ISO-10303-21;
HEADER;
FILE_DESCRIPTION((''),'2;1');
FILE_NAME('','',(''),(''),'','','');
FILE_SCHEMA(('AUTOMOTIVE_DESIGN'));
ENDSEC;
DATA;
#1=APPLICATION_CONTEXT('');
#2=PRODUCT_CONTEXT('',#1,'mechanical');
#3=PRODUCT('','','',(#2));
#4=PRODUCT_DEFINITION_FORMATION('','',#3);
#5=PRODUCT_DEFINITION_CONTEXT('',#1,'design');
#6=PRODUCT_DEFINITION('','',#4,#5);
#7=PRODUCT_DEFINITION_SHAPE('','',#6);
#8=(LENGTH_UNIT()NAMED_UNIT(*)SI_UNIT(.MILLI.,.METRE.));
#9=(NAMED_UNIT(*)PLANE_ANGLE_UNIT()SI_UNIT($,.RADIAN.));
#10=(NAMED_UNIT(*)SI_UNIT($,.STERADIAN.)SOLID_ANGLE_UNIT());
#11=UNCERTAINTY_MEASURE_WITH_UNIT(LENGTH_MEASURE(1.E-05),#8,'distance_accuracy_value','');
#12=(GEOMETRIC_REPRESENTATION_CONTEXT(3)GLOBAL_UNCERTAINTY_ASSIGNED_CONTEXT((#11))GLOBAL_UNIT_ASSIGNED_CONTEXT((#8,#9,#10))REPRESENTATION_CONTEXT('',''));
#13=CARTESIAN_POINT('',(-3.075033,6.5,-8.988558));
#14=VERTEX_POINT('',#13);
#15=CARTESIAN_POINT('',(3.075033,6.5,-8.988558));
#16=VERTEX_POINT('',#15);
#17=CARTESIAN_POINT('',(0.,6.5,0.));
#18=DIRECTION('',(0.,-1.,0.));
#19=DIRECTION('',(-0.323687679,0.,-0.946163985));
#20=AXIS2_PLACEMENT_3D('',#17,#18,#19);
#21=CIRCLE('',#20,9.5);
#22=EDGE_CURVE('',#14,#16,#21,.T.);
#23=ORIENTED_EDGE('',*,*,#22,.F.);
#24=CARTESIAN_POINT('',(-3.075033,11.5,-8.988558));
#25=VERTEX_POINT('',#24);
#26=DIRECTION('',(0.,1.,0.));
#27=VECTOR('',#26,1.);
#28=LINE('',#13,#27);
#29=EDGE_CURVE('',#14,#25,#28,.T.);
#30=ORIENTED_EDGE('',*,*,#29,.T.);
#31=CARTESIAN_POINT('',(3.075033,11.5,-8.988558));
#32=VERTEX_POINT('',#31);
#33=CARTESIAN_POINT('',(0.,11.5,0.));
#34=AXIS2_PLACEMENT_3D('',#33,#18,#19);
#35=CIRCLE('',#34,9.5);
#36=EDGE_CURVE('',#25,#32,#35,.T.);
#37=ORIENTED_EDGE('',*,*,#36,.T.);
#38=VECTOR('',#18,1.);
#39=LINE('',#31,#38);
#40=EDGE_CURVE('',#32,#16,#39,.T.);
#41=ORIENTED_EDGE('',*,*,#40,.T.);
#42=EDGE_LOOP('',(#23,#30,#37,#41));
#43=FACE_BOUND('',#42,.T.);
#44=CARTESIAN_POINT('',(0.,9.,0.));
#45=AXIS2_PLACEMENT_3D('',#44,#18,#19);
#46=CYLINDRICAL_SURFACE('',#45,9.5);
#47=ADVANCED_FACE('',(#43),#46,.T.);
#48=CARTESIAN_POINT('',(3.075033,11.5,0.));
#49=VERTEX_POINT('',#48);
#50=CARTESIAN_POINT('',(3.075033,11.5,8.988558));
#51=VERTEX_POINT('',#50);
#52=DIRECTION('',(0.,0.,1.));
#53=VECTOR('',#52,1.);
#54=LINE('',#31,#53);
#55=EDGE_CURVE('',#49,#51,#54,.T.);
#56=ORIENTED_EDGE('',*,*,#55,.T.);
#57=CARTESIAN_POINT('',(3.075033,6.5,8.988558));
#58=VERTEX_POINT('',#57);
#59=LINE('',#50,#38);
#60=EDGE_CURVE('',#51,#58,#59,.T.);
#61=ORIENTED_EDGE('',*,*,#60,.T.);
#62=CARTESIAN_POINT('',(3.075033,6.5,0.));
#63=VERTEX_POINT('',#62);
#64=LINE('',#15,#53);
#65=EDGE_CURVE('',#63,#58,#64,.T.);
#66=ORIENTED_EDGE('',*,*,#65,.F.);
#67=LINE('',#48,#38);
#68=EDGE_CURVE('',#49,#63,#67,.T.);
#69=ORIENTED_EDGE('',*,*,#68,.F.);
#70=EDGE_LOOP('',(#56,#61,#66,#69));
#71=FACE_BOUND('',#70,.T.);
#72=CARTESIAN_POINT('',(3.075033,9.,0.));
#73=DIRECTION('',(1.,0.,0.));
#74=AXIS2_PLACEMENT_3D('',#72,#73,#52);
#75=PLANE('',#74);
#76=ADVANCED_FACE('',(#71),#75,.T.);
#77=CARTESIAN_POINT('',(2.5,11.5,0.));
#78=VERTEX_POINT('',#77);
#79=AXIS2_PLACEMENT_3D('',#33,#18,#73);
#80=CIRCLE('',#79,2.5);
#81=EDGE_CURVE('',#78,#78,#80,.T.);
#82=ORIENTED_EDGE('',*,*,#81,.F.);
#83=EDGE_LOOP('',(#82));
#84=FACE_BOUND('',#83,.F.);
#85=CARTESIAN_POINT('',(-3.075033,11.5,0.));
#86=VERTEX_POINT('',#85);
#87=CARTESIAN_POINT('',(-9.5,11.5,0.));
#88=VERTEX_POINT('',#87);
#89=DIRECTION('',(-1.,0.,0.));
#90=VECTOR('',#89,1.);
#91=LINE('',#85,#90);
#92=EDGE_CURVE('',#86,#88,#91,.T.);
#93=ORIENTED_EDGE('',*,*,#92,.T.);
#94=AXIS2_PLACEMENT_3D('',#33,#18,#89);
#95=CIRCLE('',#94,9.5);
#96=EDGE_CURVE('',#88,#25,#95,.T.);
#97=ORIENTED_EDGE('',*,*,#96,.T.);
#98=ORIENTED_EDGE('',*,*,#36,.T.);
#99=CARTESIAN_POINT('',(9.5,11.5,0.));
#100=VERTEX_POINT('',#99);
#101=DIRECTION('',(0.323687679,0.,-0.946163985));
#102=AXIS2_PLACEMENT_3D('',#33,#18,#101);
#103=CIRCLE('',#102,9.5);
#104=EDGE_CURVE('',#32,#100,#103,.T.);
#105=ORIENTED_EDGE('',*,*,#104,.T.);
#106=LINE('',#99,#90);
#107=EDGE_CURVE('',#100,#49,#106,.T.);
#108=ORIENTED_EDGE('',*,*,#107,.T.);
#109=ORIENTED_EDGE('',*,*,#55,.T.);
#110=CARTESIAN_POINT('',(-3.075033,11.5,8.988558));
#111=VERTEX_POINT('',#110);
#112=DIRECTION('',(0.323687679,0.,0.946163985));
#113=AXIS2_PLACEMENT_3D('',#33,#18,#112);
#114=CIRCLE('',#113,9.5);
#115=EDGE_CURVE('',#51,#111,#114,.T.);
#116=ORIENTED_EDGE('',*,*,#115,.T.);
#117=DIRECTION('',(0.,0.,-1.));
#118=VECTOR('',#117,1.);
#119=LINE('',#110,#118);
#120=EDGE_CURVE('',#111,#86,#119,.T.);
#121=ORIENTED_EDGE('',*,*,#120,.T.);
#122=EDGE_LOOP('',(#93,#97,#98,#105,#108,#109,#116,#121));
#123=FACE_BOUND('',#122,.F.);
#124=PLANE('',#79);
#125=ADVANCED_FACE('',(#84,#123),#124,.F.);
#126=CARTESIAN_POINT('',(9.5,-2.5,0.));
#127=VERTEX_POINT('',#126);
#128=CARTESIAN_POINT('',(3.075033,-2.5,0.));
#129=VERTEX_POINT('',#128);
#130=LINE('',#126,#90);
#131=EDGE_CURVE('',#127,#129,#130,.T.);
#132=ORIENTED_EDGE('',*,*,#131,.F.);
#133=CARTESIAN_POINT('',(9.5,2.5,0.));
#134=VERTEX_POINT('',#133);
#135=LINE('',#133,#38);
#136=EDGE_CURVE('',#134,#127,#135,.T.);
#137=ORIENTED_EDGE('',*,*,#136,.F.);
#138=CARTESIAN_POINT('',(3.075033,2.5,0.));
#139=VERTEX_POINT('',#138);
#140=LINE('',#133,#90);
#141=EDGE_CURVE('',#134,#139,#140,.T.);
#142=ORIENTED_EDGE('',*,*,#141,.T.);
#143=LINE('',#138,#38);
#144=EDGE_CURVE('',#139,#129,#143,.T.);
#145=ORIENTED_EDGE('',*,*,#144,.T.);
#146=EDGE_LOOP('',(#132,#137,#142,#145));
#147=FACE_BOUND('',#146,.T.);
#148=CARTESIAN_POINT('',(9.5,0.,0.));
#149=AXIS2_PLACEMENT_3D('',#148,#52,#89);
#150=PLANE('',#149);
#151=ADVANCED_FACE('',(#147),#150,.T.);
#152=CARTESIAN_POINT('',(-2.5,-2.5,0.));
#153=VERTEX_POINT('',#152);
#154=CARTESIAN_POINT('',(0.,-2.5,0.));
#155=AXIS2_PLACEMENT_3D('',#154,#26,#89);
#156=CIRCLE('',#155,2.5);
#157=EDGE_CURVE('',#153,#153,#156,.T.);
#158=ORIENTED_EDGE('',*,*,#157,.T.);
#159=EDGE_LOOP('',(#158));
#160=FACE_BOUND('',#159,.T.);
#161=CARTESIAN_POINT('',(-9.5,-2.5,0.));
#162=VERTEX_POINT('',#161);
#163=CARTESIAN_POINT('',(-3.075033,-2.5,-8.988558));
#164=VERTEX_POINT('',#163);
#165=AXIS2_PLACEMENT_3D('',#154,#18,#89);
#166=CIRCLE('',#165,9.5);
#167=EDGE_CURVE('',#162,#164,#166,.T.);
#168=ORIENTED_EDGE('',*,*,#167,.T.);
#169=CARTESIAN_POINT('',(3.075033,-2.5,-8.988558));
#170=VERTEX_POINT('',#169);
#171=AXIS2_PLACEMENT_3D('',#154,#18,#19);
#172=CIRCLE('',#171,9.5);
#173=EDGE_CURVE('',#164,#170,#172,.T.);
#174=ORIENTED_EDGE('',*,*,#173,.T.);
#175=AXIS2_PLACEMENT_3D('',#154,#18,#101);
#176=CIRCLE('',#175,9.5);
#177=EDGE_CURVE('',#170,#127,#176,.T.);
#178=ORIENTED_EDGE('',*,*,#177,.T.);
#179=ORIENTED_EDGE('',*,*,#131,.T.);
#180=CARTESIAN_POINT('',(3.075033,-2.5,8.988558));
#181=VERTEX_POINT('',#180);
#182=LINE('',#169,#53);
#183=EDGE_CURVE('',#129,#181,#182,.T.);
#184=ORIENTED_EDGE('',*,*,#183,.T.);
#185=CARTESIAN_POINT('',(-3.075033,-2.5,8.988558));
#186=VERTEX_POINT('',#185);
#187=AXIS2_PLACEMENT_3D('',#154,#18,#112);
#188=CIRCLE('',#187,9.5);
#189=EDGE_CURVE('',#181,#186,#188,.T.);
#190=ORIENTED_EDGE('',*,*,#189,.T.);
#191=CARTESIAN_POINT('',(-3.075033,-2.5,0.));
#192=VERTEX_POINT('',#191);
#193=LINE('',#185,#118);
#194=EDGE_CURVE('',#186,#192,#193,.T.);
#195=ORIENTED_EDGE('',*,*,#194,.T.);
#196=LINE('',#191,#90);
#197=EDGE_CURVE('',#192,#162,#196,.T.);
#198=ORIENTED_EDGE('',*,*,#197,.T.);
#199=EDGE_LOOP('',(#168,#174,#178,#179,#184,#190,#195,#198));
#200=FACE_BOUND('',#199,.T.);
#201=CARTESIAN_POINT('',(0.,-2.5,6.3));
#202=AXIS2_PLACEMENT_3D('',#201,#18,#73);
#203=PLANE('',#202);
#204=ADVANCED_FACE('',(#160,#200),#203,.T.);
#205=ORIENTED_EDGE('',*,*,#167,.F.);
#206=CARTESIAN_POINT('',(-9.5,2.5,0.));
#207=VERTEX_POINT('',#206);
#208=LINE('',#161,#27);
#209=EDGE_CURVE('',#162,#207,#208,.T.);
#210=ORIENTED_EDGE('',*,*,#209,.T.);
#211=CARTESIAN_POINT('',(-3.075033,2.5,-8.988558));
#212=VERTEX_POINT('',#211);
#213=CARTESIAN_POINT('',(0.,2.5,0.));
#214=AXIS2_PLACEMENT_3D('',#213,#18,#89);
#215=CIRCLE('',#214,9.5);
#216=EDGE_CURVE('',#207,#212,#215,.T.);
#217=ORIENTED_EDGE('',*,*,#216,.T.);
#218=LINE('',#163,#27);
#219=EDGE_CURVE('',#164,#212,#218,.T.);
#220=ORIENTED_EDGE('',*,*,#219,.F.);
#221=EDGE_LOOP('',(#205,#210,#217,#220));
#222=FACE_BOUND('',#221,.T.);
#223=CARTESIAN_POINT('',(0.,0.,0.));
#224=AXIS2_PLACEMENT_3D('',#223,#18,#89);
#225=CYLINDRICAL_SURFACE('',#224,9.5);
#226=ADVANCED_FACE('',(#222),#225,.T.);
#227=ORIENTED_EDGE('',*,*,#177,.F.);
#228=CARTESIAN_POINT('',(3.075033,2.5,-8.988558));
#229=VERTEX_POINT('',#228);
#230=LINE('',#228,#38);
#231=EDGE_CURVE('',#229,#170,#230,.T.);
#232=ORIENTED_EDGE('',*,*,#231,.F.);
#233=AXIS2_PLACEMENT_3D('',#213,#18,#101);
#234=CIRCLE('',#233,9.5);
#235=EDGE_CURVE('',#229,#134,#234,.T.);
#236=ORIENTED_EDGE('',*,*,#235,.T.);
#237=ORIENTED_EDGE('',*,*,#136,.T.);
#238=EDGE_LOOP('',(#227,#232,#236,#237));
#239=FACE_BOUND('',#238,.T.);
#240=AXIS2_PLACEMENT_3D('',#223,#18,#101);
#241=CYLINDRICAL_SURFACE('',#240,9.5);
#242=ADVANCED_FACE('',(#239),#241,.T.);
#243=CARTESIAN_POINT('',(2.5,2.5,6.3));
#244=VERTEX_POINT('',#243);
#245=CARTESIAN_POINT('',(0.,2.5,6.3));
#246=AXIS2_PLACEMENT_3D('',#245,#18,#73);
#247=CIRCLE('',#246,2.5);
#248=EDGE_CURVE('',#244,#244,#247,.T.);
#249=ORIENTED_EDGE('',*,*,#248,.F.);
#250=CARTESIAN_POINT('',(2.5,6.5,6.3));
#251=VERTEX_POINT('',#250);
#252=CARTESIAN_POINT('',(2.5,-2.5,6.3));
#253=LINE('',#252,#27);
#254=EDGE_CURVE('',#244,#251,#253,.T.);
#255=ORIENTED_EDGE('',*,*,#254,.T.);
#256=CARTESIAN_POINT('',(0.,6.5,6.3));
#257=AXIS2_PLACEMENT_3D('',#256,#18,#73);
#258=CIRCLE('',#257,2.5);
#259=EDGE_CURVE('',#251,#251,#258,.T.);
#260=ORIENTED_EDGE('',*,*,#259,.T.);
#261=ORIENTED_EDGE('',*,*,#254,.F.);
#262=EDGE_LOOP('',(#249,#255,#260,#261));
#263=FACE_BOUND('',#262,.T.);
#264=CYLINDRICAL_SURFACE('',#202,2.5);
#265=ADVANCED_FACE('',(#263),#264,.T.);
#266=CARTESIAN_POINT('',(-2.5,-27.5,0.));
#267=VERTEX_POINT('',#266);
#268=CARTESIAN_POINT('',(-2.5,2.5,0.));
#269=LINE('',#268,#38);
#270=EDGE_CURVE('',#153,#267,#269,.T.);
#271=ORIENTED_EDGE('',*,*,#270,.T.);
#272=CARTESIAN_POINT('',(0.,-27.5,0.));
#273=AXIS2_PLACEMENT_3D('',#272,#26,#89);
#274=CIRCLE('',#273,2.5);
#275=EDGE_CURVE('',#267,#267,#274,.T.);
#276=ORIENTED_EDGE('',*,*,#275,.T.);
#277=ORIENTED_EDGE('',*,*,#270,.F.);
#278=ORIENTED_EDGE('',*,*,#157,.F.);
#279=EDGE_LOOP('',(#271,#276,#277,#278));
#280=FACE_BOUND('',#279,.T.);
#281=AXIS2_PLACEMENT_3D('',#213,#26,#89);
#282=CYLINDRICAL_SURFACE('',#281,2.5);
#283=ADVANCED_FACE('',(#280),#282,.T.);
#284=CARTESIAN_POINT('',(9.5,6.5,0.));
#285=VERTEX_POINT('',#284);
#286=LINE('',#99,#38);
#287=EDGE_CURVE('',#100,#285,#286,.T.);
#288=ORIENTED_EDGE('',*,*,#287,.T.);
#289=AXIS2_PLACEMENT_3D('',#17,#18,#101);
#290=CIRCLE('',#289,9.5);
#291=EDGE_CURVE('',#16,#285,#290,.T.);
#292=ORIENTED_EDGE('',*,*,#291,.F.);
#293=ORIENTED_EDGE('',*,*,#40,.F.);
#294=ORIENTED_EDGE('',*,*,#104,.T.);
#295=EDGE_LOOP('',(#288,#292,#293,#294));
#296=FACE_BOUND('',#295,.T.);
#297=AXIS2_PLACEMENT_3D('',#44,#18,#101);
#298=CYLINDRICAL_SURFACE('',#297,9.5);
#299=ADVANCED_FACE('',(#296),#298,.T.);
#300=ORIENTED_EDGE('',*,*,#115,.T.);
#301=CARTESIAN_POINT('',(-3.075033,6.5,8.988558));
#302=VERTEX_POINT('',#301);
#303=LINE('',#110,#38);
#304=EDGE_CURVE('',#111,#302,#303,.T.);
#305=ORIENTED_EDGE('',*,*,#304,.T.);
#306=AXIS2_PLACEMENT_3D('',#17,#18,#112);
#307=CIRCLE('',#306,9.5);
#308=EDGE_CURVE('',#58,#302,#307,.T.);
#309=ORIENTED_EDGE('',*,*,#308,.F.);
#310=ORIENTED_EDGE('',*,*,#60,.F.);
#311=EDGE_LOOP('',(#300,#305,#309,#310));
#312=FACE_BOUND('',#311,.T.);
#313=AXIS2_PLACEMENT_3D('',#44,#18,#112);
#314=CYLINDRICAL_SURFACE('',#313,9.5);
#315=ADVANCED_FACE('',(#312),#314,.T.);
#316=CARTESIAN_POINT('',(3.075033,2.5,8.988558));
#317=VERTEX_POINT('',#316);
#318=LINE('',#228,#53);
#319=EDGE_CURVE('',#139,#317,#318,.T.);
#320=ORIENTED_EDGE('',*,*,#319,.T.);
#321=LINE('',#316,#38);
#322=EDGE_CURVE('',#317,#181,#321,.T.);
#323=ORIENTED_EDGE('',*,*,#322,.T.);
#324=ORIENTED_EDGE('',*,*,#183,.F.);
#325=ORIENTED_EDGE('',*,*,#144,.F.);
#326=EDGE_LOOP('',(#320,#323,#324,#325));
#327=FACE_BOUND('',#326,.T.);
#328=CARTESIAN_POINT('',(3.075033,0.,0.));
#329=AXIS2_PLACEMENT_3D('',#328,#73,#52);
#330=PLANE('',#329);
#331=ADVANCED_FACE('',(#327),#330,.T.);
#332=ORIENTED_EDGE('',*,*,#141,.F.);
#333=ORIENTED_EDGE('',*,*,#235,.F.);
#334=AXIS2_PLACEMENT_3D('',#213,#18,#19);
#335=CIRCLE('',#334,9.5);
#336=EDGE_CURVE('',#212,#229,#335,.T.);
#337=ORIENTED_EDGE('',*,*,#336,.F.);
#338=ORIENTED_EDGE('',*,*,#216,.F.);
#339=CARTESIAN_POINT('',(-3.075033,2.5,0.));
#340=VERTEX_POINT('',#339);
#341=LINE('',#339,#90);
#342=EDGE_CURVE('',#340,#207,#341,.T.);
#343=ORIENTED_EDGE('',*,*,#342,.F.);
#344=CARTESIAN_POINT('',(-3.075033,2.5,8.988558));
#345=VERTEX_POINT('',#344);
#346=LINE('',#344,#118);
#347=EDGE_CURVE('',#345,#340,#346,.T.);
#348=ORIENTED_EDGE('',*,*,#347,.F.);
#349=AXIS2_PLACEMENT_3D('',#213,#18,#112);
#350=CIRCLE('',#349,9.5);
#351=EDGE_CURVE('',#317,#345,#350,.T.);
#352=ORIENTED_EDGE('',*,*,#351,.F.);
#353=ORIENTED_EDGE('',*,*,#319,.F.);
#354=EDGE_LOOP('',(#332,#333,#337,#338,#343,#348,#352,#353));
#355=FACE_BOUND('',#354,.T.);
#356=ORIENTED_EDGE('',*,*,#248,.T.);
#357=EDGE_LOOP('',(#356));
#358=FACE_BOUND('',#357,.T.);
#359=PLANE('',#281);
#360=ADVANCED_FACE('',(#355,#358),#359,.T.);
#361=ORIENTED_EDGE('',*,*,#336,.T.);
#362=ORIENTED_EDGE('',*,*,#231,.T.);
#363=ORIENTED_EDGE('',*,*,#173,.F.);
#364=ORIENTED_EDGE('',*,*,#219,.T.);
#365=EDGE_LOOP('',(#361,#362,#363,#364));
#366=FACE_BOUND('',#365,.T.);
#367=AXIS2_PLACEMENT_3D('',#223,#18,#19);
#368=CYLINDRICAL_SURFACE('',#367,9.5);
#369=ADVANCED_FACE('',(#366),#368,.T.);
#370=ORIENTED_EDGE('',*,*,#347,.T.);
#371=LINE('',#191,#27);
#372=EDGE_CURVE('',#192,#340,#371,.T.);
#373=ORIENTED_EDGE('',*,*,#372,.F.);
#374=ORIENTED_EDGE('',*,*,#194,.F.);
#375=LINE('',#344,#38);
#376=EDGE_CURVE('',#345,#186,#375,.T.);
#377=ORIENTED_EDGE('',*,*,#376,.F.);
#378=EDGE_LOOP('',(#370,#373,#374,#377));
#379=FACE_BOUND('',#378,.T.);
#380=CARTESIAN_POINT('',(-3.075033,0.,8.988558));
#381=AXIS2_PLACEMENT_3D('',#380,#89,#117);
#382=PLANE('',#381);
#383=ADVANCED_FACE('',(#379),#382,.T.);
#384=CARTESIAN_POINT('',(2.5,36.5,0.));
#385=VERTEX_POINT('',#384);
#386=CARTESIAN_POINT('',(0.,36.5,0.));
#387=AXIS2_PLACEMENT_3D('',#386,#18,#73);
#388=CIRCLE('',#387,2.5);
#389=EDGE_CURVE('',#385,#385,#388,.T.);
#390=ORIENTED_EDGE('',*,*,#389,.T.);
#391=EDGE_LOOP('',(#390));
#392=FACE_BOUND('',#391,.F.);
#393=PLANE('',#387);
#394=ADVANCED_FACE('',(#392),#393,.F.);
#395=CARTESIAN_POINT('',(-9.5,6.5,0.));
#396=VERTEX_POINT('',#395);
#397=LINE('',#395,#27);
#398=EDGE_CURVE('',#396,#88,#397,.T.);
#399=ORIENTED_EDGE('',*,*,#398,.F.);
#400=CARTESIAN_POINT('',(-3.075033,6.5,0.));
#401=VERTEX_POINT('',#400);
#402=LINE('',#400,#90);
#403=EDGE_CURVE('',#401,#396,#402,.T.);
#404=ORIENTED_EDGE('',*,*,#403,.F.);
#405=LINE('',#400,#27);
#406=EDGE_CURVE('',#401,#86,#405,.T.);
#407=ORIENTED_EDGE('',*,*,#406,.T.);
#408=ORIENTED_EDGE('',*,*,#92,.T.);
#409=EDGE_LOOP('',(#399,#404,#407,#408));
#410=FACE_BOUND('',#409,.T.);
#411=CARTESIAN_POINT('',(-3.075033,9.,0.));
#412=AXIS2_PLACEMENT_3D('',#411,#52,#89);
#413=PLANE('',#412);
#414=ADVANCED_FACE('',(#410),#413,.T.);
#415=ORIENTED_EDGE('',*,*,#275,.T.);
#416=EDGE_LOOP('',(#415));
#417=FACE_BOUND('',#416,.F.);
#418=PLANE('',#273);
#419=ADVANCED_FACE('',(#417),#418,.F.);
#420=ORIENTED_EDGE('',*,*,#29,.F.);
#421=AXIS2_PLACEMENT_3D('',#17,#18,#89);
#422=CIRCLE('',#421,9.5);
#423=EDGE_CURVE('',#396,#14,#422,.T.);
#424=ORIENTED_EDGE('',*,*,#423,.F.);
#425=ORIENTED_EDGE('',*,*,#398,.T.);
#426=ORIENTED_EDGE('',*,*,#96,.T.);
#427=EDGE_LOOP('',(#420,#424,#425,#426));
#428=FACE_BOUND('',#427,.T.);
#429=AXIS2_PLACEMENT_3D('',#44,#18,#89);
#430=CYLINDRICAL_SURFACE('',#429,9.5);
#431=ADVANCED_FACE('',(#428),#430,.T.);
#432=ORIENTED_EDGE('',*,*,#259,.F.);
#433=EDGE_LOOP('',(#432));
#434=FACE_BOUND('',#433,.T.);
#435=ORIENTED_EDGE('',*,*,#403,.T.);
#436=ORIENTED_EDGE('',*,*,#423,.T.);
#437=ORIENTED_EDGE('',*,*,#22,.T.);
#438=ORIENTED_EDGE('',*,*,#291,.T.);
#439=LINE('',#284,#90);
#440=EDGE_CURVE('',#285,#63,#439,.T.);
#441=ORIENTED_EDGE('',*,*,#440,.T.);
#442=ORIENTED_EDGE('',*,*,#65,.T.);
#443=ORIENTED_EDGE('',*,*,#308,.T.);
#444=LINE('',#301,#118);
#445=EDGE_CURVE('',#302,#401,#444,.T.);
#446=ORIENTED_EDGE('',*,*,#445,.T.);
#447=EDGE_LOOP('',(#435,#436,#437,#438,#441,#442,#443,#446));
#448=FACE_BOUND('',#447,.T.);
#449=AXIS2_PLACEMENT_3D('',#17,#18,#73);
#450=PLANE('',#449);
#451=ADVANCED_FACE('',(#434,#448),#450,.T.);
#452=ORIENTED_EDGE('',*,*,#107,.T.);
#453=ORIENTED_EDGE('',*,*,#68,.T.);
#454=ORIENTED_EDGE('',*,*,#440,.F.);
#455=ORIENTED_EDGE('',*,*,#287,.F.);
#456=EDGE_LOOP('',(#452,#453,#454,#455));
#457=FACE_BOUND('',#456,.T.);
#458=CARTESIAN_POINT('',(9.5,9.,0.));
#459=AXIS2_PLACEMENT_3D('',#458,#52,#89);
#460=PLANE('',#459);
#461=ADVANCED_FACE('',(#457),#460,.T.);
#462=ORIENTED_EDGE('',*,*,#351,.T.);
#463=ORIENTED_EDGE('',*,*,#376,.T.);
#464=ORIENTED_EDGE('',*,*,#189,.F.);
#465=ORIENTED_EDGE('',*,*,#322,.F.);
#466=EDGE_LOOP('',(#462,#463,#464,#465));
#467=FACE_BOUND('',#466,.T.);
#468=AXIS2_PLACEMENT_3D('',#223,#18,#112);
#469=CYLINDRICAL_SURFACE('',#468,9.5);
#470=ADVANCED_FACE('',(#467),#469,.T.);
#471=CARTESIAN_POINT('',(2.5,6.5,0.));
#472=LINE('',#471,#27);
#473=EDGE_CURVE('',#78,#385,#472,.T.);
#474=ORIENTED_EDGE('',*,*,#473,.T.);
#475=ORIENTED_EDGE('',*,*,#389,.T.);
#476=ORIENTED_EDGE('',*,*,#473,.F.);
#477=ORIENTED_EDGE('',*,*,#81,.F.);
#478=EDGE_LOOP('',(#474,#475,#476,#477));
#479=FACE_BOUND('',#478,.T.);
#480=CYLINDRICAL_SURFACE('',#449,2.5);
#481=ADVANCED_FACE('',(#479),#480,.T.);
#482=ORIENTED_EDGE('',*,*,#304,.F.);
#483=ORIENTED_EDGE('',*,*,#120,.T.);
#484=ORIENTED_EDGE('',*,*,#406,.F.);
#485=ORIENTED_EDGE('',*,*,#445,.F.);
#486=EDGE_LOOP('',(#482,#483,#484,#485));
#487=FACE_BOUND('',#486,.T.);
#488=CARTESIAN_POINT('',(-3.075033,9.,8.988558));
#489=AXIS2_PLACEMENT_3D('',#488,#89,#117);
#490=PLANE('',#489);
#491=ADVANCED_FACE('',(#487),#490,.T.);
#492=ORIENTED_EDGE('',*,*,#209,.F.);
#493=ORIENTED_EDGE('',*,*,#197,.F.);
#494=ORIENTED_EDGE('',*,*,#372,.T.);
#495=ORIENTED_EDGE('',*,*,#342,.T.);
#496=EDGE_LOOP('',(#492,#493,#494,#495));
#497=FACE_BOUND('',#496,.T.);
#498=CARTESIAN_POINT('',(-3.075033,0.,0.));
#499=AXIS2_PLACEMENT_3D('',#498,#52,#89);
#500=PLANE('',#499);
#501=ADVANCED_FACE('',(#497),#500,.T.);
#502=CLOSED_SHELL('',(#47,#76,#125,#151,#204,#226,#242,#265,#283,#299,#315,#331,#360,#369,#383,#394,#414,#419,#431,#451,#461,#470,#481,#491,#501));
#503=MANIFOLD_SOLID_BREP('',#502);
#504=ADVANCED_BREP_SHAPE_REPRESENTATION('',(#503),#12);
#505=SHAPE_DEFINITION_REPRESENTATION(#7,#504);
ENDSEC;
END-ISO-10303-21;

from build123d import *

# Parameters (mm, degrees)
F1_DEPTH = 2.5
F2_R     = 2.5
F4_DEPTH = 14
F5_R     = 2.5
F6_DEPTH = 30
F7_R     = 2.5
F8_DEPTH = 30


# Not quite as in the source:
# - a feature names something its author has since deleted; it is built from what else it names


with BuildPart() as f1:
    # F0 (on Front) → F1 (new body, symmetric)
    with BuildSketch(Plane.XZ):
        with BuildLine():
            ThreePointArc((-3.0750329511, -8.9885578571), (0, -9.5), (3.0750329511, -8.9885578571))
            Line((3.0750329511, -8.9885578571), (3.0750329511, 0))
            Line((3.0750329511, 0), (3.0750329511, 8.9885578571))
            ThreePointArc((3.0750329511, 8.9885578571), (0, 9.5), (-3.0750329511, 8.9885578571))
            Line((-3.0750329511, 8.9885578571), (-3.0750329511, 0))
            Line((-3.0750329511, 0), (-3.0750329511, -8.9885578571))
        make_face()
        with BuildLine():
            ThreePointArc((-9.5, 0), (-7.7286096109, -5.5243636269), (-3.0750329511, -8.9885578571))
            Line((-3.0750329511, -8.9885578571), (-3.0750329511, 0))
            Line((-3.0750329511, 0), (-9.5, 0))
        make_face()
        with BuildLine():
            Line((3.0750329511, 0), (3.0750329511, -8.9885578571))
            ThreePointArc((3.0750329511, -8.9885578571), (7.7286096109, -5.5243636269), (9.5, 0))
            Line((9.5, 0), (3.0750329511, 0))
        make_face()
    extrude(amount=F1_DEPTH, both=True)


with BuildPart() as f3_1:
    # F3: copy of F1
    add(f1.part.moved(Location((0, 9, 0))))


with BuildPart() as f1_1:
    add(f1.part)

    add(f3_1.part)  # F4 merges F3_1
    # F2 (on face) → F4 (join, through all)
    with BuildSketch(Plane.XZ.offset(2.5)):
        with Locations((0, 6.3)):
            Circle(F2_R)
    extrude(amount=-F4_DEPTH)

    # F5 (on face) → F6 (join)
    with BuildSketch(Plane(origin=(0, 2.5, 0), x_dir=(-1, 0, 0), z_dir=(0, 1, 0))):
        Circle(F5_R)
    extrude(amount=-F6_DEPTH)

    # F7 (on face) → F8 (join)
    with BuildSketch(Plane.XZ.offset(-6.5)):
        Circle(F7_R)
    extrude(amount=-F8_DEPTH)


solid = f1_1.part
